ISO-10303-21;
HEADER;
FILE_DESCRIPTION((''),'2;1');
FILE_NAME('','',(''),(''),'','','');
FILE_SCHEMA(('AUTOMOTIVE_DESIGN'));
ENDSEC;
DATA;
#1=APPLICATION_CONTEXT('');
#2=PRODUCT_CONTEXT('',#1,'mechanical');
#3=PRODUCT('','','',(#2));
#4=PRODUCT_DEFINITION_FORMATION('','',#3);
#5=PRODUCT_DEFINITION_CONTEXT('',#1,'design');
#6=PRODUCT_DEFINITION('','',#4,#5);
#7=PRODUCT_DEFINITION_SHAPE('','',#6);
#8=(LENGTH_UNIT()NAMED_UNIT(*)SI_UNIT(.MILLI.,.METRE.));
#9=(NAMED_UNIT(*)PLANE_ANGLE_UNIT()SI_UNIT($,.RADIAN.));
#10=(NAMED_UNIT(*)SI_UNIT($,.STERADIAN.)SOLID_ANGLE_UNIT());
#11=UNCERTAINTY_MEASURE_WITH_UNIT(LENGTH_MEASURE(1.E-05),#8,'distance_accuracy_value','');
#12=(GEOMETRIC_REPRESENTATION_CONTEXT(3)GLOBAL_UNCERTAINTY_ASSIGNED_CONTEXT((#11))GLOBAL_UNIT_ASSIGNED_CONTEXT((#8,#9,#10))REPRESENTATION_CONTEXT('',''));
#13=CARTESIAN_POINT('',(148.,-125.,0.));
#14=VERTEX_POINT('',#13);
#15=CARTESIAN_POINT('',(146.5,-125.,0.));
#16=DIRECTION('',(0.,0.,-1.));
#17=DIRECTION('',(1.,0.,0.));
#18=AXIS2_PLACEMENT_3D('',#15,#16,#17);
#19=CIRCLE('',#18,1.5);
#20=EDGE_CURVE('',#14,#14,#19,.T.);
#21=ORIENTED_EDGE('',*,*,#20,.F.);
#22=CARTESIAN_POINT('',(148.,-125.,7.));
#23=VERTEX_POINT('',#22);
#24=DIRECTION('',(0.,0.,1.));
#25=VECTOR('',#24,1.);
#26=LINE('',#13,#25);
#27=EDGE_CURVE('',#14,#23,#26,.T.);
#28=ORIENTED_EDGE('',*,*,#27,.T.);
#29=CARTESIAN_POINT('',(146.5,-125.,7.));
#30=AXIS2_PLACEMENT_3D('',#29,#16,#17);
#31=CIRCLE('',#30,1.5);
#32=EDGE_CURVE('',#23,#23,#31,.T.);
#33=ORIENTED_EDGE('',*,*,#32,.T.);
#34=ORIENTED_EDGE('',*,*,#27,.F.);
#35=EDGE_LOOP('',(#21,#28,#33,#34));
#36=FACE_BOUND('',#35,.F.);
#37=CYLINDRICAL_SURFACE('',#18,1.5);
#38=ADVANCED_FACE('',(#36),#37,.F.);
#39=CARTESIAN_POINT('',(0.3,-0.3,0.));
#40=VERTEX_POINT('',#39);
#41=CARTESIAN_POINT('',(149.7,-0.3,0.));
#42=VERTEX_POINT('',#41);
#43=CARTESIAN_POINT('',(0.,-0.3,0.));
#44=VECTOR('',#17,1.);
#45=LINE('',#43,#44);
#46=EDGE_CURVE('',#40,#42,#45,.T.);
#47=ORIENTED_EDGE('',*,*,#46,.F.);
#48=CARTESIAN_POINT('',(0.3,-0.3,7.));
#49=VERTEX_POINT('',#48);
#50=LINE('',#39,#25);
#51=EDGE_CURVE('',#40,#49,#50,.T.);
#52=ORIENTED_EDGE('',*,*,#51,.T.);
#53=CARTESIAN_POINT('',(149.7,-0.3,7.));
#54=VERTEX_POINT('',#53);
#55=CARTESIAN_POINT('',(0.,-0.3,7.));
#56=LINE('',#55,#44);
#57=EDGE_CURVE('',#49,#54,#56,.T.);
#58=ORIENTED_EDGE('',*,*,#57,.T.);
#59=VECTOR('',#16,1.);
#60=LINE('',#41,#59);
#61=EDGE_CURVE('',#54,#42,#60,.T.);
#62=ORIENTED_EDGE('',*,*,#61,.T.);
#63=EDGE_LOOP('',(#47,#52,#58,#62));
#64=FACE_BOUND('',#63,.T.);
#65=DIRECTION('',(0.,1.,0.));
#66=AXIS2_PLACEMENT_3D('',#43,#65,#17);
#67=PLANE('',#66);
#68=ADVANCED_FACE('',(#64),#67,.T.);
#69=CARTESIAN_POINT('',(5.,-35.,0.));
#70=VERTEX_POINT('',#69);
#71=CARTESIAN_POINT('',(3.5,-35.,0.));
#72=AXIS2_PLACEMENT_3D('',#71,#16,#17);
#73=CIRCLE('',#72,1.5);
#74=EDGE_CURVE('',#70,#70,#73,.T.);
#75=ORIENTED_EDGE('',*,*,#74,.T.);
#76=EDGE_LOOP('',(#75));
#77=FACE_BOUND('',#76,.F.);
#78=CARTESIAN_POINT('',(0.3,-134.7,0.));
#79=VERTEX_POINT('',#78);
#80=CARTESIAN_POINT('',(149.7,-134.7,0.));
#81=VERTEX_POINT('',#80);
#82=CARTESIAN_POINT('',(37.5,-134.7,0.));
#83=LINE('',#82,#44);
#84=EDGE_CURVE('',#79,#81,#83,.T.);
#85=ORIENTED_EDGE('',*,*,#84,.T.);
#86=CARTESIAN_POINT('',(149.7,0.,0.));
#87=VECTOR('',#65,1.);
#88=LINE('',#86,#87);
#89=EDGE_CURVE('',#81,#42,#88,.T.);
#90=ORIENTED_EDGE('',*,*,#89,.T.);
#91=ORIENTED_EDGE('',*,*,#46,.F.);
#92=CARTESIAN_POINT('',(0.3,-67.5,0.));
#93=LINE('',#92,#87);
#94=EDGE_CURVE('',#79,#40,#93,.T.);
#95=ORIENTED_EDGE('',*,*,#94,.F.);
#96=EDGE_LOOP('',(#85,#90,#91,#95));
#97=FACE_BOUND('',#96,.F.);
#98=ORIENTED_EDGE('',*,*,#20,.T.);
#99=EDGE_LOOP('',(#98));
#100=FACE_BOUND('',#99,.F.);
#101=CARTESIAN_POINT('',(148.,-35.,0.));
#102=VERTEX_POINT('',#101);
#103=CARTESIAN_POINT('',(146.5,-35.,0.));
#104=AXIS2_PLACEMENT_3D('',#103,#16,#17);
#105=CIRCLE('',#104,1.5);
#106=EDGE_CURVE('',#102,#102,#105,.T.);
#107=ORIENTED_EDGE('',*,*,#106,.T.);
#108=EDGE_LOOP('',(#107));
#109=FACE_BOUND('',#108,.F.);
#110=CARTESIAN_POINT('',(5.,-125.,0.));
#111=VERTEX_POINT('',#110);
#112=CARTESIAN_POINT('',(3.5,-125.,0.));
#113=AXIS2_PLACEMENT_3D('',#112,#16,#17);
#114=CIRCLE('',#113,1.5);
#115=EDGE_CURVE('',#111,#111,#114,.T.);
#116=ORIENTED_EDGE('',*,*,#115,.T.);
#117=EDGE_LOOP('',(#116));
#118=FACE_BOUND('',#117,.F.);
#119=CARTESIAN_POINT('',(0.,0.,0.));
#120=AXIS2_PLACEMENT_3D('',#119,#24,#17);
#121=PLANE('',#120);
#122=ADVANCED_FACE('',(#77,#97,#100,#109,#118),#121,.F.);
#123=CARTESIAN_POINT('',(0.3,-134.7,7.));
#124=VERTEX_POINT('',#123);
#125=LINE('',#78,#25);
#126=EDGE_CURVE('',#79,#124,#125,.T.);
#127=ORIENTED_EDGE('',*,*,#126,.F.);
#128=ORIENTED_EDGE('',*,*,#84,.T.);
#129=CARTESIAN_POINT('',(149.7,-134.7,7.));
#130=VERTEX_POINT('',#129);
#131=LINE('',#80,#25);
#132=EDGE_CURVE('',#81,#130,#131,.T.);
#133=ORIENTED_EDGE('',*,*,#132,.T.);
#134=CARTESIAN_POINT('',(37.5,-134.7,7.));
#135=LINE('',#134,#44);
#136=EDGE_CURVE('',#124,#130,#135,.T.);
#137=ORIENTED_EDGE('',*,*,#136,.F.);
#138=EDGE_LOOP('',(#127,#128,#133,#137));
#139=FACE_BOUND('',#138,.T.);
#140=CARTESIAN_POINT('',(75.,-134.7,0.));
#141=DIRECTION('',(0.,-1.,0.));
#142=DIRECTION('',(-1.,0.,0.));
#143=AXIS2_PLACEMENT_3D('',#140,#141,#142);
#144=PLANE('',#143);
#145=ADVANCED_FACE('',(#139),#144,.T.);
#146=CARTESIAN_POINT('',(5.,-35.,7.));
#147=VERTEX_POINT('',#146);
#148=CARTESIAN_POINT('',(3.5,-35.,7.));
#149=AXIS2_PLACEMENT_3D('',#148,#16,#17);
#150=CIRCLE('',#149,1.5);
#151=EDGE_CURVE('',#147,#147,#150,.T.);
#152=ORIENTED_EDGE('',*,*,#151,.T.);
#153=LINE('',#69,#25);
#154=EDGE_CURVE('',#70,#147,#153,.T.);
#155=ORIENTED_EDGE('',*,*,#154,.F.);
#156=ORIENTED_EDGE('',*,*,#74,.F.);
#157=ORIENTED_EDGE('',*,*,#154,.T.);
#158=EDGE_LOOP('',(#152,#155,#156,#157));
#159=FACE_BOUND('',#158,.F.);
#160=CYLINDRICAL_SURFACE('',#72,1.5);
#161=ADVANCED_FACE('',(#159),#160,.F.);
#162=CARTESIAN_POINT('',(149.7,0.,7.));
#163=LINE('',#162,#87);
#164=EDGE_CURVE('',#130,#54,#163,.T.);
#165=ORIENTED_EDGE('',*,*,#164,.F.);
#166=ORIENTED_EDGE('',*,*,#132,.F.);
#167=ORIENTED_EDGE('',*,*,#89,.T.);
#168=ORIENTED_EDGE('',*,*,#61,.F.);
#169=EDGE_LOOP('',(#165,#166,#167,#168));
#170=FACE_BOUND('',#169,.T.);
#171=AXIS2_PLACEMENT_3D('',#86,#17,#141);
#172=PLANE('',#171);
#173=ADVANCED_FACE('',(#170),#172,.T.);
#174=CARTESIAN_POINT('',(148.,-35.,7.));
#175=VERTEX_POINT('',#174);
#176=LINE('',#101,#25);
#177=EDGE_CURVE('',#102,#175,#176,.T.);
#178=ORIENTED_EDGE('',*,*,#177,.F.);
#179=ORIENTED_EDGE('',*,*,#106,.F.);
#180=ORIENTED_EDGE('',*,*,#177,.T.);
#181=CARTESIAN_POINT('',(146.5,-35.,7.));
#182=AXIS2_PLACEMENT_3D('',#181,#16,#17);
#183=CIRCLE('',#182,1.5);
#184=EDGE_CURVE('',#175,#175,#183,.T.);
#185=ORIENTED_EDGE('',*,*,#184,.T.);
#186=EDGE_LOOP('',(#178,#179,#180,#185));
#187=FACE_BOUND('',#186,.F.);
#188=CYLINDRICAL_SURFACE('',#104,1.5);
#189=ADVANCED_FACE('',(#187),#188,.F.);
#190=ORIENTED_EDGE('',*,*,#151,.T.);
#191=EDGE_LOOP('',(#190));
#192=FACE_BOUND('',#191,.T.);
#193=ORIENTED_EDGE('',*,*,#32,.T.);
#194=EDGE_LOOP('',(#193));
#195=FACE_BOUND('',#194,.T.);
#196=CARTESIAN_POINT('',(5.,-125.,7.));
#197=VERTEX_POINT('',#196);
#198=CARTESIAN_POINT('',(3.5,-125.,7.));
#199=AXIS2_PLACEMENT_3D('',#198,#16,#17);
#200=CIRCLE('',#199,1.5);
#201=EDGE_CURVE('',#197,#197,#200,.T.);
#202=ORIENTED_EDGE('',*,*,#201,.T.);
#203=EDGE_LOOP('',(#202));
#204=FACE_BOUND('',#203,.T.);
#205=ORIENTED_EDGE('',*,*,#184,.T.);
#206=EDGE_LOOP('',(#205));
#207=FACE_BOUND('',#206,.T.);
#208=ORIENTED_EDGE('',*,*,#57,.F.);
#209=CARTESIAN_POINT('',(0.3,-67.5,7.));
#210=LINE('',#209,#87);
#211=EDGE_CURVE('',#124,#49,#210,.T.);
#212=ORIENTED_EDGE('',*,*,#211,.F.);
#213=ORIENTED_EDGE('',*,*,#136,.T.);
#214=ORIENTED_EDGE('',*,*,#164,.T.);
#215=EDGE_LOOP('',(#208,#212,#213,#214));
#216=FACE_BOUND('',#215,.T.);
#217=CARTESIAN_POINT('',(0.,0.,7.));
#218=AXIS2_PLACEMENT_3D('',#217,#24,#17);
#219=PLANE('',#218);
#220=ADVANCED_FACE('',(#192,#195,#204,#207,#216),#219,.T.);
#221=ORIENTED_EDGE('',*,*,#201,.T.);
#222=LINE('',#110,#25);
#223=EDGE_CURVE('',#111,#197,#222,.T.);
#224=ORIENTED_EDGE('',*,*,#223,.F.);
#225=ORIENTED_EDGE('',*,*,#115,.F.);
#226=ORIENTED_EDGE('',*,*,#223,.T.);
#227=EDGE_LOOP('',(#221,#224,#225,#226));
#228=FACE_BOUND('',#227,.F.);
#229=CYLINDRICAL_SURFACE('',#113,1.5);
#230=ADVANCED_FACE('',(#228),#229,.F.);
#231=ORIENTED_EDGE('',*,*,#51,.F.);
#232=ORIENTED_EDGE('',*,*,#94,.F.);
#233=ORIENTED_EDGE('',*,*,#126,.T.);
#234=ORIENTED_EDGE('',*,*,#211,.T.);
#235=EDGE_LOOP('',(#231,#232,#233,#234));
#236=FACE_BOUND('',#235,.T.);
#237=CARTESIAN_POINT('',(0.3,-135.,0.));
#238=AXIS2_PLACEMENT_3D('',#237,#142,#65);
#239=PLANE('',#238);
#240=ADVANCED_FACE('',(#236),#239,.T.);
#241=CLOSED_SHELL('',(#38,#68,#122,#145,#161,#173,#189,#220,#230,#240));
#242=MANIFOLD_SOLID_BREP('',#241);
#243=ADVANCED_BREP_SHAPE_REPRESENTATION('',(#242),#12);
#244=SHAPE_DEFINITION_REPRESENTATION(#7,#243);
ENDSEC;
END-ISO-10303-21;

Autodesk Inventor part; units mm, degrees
ref_plane "YZ Plane" through (0, 0, 0) normal (1, 0, 0) x (0, 1, 0)
ref_plane "XZ Plane" through (0, 0, 0) normal (0, 1, 0) x (-1, 0, 0)
ref_plane "XY Plane" through (0, 0, 0) normal (0, 0, 1) x (1, 0, 0)
sketch "Sketch1" plane through (0, 0, 0) normal (0, 0, 1) x (1, 0, 0)
  line L0 (0, 0) -> (150, 0)
  line L1 (150, 0) -> (150, -135)
  line L2 (150, -135) -> (0, -135)
  line L3 (0, -135) -> (0, 0)
  circle A0 centre (3.5, -35) radius 1.5
  line L4 (75, 0) -> (75, -135)
  circle A1 centre (146.5, -35) radius 1.5
  circle A2 centre (3.5, -125) radius 1.5
  circle A3 centre (146.5, -125) radius 1.5
  dimension "d0" = 150
  dimension "d1" = 135
  dimension "d2" = 3
  dimension "d3" = 3.5
  dimension "d4" = 35
  dimension "d5" = 3
  dimension "d6" = 3.5
  dimension "d7" = 90
extrude "Extrusion1" add sketch "Sketch1" along normal blind 7
move faces "Move1" translate (0, -0.3, 0) faces at (100, 0, 2.3333)
move faces "Move2" translate (-0.3, 0, 0) faces at (150, -90.1, 2.3333)
move faces "Move3" translate (0, 0.3, 0) faces at (49.9, -135, 2.3333)
move faces "Move4" translate (0.3, 0, 0) faces at (0, -45.1, 2.3333)
properties part number "mávač_víčko"
